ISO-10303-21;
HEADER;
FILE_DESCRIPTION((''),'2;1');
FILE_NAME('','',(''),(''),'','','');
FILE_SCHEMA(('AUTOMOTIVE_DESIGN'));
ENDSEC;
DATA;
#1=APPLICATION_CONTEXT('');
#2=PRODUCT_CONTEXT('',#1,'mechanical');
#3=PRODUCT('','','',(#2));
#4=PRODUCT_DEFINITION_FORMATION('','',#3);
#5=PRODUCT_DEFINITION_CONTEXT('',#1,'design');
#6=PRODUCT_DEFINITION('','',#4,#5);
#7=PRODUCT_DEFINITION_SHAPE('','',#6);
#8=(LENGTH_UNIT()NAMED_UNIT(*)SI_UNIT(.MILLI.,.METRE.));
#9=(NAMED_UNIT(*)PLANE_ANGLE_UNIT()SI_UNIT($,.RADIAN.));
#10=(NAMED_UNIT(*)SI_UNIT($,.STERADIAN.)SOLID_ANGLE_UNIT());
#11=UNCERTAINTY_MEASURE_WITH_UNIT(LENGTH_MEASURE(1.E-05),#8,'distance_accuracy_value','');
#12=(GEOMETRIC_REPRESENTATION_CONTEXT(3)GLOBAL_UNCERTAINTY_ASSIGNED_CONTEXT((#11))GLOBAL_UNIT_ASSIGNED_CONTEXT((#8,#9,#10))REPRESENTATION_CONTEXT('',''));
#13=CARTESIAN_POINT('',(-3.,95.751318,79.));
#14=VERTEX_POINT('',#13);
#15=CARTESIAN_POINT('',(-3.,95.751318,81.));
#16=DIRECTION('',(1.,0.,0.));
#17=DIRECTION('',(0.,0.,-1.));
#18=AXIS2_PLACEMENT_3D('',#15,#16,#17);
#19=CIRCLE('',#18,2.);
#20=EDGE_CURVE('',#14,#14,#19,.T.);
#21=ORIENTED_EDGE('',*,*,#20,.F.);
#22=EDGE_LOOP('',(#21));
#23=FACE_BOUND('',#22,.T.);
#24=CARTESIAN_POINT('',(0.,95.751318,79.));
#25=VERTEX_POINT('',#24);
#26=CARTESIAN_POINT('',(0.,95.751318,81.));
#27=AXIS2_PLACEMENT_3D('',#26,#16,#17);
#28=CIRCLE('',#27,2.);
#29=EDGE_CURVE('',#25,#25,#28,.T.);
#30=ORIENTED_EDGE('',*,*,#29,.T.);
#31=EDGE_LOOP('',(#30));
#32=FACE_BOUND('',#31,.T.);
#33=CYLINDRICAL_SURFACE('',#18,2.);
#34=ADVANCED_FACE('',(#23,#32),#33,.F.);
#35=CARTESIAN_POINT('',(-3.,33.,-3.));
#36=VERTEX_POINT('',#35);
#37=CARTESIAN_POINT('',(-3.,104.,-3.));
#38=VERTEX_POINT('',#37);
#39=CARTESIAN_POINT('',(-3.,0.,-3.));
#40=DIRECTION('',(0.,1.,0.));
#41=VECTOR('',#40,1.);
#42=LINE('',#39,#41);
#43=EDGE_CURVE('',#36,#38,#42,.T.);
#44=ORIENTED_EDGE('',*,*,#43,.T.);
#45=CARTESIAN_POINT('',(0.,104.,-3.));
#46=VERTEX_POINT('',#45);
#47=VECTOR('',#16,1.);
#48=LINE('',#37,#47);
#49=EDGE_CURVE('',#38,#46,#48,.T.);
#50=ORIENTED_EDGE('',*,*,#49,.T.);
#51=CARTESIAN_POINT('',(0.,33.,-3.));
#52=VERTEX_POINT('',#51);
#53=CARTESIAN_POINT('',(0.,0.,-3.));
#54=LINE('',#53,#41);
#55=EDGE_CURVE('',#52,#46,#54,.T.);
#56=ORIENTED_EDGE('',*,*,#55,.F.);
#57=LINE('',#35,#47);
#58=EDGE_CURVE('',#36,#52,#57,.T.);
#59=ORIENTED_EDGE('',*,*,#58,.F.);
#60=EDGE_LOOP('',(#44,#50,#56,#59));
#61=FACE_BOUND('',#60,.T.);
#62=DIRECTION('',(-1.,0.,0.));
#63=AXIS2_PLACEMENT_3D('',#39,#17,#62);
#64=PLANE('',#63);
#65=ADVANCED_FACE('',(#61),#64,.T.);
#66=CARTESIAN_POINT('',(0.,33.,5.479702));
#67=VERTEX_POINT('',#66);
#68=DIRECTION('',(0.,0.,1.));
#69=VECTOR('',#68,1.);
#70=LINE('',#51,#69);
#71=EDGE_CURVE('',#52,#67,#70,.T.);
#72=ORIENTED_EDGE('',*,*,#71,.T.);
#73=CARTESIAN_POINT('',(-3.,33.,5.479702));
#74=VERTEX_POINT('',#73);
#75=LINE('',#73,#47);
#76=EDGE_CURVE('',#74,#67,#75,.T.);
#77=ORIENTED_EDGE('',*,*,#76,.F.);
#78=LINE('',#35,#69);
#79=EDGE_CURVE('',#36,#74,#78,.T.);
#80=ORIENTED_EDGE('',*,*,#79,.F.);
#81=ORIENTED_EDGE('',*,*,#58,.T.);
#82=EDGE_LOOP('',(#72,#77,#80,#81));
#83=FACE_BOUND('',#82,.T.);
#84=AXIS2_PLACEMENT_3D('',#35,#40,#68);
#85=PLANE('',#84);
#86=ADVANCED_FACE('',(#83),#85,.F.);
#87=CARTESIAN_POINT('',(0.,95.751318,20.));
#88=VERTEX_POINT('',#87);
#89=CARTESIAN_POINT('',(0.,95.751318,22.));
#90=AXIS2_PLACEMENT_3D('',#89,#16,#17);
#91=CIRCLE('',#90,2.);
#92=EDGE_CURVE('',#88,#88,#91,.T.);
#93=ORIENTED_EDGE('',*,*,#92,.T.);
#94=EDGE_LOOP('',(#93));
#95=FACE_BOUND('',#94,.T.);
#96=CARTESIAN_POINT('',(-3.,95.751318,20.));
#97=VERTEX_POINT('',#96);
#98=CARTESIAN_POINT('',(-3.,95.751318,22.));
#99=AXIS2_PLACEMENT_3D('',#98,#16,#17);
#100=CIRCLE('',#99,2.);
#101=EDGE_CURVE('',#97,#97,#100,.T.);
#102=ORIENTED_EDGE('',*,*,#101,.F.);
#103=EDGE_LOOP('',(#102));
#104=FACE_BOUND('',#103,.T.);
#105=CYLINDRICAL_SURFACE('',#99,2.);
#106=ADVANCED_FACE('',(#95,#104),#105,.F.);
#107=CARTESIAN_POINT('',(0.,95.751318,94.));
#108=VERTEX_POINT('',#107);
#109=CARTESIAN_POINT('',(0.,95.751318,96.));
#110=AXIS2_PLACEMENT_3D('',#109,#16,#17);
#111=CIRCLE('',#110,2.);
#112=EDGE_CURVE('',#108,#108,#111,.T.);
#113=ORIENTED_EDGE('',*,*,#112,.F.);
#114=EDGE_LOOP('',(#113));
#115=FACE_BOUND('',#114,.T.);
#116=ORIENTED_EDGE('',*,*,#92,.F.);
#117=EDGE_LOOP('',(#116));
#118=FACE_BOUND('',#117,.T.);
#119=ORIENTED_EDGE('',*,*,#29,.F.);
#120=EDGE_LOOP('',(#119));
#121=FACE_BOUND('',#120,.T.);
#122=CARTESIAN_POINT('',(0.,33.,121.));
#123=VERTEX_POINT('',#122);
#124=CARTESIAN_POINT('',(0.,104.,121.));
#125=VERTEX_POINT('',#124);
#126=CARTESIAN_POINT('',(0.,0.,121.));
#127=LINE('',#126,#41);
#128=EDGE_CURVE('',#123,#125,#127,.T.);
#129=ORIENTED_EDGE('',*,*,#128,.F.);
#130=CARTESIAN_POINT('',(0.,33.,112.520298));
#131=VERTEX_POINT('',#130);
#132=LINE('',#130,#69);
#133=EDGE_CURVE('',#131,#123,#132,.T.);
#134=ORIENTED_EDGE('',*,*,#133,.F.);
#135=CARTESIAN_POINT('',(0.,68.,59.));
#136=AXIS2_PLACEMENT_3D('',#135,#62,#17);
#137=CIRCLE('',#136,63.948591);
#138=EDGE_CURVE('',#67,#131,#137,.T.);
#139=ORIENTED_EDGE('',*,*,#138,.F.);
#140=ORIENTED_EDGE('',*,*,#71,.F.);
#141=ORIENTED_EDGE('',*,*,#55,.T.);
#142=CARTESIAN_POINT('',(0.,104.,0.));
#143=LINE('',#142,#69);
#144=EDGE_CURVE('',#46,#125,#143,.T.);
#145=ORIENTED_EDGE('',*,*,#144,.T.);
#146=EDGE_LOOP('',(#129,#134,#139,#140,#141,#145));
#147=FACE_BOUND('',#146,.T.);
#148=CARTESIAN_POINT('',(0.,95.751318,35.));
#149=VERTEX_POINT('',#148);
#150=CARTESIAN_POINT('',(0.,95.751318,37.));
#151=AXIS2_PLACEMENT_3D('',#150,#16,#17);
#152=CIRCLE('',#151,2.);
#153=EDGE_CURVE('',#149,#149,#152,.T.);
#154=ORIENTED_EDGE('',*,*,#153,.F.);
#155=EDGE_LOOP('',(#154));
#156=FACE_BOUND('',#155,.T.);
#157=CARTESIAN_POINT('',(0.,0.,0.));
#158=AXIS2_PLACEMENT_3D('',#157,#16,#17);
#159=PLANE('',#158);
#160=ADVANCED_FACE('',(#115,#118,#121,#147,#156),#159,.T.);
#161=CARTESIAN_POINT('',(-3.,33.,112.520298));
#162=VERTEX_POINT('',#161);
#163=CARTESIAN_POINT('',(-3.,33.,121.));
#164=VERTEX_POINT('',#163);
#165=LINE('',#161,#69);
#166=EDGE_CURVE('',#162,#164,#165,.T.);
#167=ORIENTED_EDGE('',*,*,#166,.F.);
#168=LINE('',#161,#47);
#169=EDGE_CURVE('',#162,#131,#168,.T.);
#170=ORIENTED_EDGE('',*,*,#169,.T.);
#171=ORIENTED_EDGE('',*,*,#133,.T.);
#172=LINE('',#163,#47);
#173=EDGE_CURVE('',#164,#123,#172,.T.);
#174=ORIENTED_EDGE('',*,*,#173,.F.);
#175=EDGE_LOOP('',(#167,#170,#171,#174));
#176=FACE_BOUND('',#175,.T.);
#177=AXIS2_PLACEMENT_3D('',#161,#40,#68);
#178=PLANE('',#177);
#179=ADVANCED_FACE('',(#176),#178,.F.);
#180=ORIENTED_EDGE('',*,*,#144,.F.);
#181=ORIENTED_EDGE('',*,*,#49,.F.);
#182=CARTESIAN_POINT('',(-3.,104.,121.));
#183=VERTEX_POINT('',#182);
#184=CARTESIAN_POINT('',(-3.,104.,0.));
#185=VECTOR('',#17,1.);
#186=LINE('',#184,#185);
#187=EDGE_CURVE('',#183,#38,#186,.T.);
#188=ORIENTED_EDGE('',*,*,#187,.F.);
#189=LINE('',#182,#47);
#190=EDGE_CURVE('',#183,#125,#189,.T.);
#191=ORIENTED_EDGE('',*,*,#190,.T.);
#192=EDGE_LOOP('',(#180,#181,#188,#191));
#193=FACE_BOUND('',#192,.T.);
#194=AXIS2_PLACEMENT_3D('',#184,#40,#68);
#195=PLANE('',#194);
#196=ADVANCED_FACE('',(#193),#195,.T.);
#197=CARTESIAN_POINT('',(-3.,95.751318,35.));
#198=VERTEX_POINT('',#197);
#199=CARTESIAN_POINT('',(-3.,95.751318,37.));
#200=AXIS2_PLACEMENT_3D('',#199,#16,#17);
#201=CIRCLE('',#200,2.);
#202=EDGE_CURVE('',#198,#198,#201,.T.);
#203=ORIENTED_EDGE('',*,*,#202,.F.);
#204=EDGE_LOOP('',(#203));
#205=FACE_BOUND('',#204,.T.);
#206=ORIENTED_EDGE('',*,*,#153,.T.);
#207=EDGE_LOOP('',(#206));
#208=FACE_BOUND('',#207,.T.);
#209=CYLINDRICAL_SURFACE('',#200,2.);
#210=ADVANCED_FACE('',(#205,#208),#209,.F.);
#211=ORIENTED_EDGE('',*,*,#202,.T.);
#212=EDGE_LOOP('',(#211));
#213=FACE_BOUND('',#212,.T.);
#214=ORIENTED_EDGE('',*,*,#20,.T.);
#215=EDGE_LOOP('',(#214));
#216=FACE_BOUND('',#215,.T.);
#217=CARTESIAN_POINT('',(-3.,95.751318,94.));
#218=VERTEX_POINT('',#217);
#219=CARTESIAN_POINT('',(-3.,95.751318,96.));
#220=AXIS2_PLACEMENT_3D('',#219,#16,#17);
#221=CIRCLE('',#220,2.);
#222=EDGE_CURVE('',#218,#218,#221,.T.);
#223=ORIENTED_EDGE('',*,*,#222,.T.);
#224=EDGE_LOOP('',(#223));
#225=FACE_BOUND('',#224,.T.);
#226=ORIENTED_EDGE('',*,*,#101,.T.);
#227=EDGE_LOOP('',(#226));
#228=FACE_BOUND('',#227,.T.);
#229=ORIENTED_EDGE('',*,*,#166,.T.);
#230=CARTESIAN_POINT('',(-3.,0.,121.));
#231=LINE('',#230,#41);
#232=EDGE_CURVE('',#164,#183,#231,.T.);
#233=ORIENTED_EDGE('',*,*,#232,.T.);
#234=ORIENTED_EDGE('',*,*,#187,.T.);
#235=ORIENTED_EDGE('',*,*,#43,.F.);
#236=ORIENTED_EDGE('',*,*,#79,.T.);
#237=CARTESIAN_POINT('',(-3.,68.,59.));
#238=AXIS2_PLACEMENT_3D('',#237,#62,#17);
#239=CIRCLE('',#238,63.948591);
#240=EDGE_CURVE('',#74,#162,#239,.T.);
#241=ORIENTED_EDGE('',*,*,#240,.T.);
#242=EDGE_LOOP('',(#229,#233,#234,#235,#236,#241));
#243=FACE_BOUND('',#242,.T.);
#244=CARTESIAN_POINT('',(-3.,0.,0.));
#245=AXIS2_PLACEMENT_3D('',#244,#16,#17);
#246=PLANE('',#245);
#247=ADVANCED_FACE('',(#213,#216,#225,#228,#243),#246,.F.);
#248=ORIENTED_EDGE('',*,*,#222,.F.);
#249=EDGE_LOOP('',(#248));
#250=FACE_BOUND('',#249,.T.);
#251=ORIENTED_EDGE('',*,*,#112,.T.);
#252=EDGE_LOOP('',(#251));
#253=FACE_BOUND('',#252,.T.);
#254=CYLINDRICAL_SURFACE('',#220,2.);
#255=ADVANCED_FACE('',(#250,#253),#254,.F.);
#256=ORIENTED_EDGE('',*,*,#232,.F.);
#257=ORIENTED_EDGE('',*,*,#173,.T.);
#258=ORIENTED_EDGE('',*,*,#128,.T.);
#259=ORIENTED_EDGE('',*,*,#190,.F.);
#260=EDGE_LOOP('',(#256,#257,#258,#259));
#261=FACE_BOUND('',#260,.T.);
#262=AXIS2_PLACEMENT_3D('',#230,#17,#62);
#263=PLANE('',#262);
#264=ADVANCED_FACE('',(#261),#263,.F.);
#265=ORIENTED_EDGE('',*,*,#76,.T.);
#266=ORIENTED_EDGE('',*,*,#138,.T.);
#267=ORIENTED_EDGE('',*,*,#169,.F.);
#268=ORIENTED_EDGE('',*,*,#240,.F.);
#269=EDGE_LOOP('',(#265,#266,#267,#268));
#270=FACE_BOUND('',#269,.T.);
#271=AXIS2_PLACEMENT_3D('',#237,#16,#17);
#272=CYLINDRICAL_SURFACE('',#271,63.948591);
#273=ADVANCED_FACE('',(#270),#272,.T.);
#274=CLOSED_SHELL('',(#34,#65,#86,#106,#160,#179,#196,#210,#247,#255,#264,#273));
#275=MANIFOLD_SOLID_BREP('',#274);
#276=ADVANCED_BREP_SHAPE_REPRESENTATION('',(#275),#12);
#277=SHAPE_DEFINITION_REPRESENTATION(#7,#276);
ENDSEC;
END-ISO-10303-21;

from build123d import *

# Parameters (mm, degrees)
IMPORTED_START          = -3
IMPORTED_BODY_4_1_DEPTH = 3
SKETCH_1_R              = 2
CUT_EXTRUDE_1_DEPTH     = 3
SKETCH_2_W              = 30
SKETCH_2_H              = 3
SKETCH_2_W_2            = 3
SKETCH_2_H_2            = 30
EXTRUDE_1_DEPTH         = 3
CUT_EXTRUDE_2_DEPTH     = 3


# Read off the part's stored shape, not the designer's step: 基体零件-零件4-1
with BuildPart() as part:
    # 基体零件-零件4-1 outline → 基体零件-零件4-1 (new body)
    with BuildSketch(Plane.YZ.offset(IMPORTED_START)):
        Polygon((-3, -3), (0, -3), (0, 0), (9.999598957, 0), (9.999598957, 3), (20.000401043, 3), (20.000401043, 0), (30, 0), (30, -3), (52, -3), (52, 0), (82, 0), (82, -3), (104, -3), (104, 19), (101, 19), (101, 49), (104, 49), (104, 69), (101, 69), (101, 99), (104, 99), (104, 121), (82, 121), (82, 118), (52, 118), (52, 121), (30, 121), (30, 118), (20.000401043, 118), (20.000401043, 115), (9.999598957, 115), (9.999598957, 118), (0, 118), (0, 121), (-3, 121), (-3, 99), (0, 99), (0, 69), (-3, 69), (-3, 49), (0, 49), (0, 19), (-3, 19), align=None)
    extrude(amount=IMPORTED_BODY_4_1_DEPTH)

    # 草图1 → 切除-拉伸1 (cut)
    with BuildSketch(Plane(origin=(0, 0, 0), x_dir=(0, 0, -1), z_dir=(1, 0, 0))):
        with Locations((-96, 95.751318052)):
            Circle(SKETCH_1_R)
        with Locations((-81, 95.751318052)):
            Circle(SKETCH_1_R)
        with Locations((-37, 95.751318052)):
            Circle(SKETCH_1_R)
        with Locations((-22, 95.751318052)):
            Circle(SKETCH_1_R)
    extrude(amount=-CUT_EXTRUDE_1_DEPTH, mode=Mode.SUBTRACT)

    # 草图2 → 凸台-拉伸1 (add)
    with BuildSketch(Plane(origin=(0, 0, 0), x_dir=(0, 0, -1), z_dir=(1, 0, 0))):
        with Locations((-84, 102.5)):
            Rectangle(SKETCH_2_W, SKETCH_2_H)
        with Locations((-34, 102.5)):
            Rectangle(SKETCH_2_W, SKETCH_2_H)
        with Locations((-119.5, 67)):
            Rectangle(SKETCH_2_W_2, SKETCH_2_H_2)
        with Locations((1.5, 67)):
            Rectangle(SKETCH_2_W_2, SKETCH_2_H_2)
    extrude(amount=-EXTRUDE_1_DEPTH)

    # 草图3 → 切除-拉伸2 (cut)
    with BuildSketch(Plane(origin=(0, 0, 0), x_dir=(0, 0, -1), z_dir=(1, 0, 0))):
        with BuildLine():
            Line((-112.520298482, 33), (-121, 33))
            Line((-121, 33), (-121, -3))
            Line((-121, -3), (3, -3))
            Line((3, -3), (3, 33))
            Line((3, 33), (-5.479701518, 33))
            ThreePointArc((-5.479701518, 33), (-59, 4.051408541), (-112.520298482, 33))
        make_face()
    extrude(amount=-CUT_EXTRUDE_2_DEPTH, mode=Mode.SUBTRACT)


solid = part.part
